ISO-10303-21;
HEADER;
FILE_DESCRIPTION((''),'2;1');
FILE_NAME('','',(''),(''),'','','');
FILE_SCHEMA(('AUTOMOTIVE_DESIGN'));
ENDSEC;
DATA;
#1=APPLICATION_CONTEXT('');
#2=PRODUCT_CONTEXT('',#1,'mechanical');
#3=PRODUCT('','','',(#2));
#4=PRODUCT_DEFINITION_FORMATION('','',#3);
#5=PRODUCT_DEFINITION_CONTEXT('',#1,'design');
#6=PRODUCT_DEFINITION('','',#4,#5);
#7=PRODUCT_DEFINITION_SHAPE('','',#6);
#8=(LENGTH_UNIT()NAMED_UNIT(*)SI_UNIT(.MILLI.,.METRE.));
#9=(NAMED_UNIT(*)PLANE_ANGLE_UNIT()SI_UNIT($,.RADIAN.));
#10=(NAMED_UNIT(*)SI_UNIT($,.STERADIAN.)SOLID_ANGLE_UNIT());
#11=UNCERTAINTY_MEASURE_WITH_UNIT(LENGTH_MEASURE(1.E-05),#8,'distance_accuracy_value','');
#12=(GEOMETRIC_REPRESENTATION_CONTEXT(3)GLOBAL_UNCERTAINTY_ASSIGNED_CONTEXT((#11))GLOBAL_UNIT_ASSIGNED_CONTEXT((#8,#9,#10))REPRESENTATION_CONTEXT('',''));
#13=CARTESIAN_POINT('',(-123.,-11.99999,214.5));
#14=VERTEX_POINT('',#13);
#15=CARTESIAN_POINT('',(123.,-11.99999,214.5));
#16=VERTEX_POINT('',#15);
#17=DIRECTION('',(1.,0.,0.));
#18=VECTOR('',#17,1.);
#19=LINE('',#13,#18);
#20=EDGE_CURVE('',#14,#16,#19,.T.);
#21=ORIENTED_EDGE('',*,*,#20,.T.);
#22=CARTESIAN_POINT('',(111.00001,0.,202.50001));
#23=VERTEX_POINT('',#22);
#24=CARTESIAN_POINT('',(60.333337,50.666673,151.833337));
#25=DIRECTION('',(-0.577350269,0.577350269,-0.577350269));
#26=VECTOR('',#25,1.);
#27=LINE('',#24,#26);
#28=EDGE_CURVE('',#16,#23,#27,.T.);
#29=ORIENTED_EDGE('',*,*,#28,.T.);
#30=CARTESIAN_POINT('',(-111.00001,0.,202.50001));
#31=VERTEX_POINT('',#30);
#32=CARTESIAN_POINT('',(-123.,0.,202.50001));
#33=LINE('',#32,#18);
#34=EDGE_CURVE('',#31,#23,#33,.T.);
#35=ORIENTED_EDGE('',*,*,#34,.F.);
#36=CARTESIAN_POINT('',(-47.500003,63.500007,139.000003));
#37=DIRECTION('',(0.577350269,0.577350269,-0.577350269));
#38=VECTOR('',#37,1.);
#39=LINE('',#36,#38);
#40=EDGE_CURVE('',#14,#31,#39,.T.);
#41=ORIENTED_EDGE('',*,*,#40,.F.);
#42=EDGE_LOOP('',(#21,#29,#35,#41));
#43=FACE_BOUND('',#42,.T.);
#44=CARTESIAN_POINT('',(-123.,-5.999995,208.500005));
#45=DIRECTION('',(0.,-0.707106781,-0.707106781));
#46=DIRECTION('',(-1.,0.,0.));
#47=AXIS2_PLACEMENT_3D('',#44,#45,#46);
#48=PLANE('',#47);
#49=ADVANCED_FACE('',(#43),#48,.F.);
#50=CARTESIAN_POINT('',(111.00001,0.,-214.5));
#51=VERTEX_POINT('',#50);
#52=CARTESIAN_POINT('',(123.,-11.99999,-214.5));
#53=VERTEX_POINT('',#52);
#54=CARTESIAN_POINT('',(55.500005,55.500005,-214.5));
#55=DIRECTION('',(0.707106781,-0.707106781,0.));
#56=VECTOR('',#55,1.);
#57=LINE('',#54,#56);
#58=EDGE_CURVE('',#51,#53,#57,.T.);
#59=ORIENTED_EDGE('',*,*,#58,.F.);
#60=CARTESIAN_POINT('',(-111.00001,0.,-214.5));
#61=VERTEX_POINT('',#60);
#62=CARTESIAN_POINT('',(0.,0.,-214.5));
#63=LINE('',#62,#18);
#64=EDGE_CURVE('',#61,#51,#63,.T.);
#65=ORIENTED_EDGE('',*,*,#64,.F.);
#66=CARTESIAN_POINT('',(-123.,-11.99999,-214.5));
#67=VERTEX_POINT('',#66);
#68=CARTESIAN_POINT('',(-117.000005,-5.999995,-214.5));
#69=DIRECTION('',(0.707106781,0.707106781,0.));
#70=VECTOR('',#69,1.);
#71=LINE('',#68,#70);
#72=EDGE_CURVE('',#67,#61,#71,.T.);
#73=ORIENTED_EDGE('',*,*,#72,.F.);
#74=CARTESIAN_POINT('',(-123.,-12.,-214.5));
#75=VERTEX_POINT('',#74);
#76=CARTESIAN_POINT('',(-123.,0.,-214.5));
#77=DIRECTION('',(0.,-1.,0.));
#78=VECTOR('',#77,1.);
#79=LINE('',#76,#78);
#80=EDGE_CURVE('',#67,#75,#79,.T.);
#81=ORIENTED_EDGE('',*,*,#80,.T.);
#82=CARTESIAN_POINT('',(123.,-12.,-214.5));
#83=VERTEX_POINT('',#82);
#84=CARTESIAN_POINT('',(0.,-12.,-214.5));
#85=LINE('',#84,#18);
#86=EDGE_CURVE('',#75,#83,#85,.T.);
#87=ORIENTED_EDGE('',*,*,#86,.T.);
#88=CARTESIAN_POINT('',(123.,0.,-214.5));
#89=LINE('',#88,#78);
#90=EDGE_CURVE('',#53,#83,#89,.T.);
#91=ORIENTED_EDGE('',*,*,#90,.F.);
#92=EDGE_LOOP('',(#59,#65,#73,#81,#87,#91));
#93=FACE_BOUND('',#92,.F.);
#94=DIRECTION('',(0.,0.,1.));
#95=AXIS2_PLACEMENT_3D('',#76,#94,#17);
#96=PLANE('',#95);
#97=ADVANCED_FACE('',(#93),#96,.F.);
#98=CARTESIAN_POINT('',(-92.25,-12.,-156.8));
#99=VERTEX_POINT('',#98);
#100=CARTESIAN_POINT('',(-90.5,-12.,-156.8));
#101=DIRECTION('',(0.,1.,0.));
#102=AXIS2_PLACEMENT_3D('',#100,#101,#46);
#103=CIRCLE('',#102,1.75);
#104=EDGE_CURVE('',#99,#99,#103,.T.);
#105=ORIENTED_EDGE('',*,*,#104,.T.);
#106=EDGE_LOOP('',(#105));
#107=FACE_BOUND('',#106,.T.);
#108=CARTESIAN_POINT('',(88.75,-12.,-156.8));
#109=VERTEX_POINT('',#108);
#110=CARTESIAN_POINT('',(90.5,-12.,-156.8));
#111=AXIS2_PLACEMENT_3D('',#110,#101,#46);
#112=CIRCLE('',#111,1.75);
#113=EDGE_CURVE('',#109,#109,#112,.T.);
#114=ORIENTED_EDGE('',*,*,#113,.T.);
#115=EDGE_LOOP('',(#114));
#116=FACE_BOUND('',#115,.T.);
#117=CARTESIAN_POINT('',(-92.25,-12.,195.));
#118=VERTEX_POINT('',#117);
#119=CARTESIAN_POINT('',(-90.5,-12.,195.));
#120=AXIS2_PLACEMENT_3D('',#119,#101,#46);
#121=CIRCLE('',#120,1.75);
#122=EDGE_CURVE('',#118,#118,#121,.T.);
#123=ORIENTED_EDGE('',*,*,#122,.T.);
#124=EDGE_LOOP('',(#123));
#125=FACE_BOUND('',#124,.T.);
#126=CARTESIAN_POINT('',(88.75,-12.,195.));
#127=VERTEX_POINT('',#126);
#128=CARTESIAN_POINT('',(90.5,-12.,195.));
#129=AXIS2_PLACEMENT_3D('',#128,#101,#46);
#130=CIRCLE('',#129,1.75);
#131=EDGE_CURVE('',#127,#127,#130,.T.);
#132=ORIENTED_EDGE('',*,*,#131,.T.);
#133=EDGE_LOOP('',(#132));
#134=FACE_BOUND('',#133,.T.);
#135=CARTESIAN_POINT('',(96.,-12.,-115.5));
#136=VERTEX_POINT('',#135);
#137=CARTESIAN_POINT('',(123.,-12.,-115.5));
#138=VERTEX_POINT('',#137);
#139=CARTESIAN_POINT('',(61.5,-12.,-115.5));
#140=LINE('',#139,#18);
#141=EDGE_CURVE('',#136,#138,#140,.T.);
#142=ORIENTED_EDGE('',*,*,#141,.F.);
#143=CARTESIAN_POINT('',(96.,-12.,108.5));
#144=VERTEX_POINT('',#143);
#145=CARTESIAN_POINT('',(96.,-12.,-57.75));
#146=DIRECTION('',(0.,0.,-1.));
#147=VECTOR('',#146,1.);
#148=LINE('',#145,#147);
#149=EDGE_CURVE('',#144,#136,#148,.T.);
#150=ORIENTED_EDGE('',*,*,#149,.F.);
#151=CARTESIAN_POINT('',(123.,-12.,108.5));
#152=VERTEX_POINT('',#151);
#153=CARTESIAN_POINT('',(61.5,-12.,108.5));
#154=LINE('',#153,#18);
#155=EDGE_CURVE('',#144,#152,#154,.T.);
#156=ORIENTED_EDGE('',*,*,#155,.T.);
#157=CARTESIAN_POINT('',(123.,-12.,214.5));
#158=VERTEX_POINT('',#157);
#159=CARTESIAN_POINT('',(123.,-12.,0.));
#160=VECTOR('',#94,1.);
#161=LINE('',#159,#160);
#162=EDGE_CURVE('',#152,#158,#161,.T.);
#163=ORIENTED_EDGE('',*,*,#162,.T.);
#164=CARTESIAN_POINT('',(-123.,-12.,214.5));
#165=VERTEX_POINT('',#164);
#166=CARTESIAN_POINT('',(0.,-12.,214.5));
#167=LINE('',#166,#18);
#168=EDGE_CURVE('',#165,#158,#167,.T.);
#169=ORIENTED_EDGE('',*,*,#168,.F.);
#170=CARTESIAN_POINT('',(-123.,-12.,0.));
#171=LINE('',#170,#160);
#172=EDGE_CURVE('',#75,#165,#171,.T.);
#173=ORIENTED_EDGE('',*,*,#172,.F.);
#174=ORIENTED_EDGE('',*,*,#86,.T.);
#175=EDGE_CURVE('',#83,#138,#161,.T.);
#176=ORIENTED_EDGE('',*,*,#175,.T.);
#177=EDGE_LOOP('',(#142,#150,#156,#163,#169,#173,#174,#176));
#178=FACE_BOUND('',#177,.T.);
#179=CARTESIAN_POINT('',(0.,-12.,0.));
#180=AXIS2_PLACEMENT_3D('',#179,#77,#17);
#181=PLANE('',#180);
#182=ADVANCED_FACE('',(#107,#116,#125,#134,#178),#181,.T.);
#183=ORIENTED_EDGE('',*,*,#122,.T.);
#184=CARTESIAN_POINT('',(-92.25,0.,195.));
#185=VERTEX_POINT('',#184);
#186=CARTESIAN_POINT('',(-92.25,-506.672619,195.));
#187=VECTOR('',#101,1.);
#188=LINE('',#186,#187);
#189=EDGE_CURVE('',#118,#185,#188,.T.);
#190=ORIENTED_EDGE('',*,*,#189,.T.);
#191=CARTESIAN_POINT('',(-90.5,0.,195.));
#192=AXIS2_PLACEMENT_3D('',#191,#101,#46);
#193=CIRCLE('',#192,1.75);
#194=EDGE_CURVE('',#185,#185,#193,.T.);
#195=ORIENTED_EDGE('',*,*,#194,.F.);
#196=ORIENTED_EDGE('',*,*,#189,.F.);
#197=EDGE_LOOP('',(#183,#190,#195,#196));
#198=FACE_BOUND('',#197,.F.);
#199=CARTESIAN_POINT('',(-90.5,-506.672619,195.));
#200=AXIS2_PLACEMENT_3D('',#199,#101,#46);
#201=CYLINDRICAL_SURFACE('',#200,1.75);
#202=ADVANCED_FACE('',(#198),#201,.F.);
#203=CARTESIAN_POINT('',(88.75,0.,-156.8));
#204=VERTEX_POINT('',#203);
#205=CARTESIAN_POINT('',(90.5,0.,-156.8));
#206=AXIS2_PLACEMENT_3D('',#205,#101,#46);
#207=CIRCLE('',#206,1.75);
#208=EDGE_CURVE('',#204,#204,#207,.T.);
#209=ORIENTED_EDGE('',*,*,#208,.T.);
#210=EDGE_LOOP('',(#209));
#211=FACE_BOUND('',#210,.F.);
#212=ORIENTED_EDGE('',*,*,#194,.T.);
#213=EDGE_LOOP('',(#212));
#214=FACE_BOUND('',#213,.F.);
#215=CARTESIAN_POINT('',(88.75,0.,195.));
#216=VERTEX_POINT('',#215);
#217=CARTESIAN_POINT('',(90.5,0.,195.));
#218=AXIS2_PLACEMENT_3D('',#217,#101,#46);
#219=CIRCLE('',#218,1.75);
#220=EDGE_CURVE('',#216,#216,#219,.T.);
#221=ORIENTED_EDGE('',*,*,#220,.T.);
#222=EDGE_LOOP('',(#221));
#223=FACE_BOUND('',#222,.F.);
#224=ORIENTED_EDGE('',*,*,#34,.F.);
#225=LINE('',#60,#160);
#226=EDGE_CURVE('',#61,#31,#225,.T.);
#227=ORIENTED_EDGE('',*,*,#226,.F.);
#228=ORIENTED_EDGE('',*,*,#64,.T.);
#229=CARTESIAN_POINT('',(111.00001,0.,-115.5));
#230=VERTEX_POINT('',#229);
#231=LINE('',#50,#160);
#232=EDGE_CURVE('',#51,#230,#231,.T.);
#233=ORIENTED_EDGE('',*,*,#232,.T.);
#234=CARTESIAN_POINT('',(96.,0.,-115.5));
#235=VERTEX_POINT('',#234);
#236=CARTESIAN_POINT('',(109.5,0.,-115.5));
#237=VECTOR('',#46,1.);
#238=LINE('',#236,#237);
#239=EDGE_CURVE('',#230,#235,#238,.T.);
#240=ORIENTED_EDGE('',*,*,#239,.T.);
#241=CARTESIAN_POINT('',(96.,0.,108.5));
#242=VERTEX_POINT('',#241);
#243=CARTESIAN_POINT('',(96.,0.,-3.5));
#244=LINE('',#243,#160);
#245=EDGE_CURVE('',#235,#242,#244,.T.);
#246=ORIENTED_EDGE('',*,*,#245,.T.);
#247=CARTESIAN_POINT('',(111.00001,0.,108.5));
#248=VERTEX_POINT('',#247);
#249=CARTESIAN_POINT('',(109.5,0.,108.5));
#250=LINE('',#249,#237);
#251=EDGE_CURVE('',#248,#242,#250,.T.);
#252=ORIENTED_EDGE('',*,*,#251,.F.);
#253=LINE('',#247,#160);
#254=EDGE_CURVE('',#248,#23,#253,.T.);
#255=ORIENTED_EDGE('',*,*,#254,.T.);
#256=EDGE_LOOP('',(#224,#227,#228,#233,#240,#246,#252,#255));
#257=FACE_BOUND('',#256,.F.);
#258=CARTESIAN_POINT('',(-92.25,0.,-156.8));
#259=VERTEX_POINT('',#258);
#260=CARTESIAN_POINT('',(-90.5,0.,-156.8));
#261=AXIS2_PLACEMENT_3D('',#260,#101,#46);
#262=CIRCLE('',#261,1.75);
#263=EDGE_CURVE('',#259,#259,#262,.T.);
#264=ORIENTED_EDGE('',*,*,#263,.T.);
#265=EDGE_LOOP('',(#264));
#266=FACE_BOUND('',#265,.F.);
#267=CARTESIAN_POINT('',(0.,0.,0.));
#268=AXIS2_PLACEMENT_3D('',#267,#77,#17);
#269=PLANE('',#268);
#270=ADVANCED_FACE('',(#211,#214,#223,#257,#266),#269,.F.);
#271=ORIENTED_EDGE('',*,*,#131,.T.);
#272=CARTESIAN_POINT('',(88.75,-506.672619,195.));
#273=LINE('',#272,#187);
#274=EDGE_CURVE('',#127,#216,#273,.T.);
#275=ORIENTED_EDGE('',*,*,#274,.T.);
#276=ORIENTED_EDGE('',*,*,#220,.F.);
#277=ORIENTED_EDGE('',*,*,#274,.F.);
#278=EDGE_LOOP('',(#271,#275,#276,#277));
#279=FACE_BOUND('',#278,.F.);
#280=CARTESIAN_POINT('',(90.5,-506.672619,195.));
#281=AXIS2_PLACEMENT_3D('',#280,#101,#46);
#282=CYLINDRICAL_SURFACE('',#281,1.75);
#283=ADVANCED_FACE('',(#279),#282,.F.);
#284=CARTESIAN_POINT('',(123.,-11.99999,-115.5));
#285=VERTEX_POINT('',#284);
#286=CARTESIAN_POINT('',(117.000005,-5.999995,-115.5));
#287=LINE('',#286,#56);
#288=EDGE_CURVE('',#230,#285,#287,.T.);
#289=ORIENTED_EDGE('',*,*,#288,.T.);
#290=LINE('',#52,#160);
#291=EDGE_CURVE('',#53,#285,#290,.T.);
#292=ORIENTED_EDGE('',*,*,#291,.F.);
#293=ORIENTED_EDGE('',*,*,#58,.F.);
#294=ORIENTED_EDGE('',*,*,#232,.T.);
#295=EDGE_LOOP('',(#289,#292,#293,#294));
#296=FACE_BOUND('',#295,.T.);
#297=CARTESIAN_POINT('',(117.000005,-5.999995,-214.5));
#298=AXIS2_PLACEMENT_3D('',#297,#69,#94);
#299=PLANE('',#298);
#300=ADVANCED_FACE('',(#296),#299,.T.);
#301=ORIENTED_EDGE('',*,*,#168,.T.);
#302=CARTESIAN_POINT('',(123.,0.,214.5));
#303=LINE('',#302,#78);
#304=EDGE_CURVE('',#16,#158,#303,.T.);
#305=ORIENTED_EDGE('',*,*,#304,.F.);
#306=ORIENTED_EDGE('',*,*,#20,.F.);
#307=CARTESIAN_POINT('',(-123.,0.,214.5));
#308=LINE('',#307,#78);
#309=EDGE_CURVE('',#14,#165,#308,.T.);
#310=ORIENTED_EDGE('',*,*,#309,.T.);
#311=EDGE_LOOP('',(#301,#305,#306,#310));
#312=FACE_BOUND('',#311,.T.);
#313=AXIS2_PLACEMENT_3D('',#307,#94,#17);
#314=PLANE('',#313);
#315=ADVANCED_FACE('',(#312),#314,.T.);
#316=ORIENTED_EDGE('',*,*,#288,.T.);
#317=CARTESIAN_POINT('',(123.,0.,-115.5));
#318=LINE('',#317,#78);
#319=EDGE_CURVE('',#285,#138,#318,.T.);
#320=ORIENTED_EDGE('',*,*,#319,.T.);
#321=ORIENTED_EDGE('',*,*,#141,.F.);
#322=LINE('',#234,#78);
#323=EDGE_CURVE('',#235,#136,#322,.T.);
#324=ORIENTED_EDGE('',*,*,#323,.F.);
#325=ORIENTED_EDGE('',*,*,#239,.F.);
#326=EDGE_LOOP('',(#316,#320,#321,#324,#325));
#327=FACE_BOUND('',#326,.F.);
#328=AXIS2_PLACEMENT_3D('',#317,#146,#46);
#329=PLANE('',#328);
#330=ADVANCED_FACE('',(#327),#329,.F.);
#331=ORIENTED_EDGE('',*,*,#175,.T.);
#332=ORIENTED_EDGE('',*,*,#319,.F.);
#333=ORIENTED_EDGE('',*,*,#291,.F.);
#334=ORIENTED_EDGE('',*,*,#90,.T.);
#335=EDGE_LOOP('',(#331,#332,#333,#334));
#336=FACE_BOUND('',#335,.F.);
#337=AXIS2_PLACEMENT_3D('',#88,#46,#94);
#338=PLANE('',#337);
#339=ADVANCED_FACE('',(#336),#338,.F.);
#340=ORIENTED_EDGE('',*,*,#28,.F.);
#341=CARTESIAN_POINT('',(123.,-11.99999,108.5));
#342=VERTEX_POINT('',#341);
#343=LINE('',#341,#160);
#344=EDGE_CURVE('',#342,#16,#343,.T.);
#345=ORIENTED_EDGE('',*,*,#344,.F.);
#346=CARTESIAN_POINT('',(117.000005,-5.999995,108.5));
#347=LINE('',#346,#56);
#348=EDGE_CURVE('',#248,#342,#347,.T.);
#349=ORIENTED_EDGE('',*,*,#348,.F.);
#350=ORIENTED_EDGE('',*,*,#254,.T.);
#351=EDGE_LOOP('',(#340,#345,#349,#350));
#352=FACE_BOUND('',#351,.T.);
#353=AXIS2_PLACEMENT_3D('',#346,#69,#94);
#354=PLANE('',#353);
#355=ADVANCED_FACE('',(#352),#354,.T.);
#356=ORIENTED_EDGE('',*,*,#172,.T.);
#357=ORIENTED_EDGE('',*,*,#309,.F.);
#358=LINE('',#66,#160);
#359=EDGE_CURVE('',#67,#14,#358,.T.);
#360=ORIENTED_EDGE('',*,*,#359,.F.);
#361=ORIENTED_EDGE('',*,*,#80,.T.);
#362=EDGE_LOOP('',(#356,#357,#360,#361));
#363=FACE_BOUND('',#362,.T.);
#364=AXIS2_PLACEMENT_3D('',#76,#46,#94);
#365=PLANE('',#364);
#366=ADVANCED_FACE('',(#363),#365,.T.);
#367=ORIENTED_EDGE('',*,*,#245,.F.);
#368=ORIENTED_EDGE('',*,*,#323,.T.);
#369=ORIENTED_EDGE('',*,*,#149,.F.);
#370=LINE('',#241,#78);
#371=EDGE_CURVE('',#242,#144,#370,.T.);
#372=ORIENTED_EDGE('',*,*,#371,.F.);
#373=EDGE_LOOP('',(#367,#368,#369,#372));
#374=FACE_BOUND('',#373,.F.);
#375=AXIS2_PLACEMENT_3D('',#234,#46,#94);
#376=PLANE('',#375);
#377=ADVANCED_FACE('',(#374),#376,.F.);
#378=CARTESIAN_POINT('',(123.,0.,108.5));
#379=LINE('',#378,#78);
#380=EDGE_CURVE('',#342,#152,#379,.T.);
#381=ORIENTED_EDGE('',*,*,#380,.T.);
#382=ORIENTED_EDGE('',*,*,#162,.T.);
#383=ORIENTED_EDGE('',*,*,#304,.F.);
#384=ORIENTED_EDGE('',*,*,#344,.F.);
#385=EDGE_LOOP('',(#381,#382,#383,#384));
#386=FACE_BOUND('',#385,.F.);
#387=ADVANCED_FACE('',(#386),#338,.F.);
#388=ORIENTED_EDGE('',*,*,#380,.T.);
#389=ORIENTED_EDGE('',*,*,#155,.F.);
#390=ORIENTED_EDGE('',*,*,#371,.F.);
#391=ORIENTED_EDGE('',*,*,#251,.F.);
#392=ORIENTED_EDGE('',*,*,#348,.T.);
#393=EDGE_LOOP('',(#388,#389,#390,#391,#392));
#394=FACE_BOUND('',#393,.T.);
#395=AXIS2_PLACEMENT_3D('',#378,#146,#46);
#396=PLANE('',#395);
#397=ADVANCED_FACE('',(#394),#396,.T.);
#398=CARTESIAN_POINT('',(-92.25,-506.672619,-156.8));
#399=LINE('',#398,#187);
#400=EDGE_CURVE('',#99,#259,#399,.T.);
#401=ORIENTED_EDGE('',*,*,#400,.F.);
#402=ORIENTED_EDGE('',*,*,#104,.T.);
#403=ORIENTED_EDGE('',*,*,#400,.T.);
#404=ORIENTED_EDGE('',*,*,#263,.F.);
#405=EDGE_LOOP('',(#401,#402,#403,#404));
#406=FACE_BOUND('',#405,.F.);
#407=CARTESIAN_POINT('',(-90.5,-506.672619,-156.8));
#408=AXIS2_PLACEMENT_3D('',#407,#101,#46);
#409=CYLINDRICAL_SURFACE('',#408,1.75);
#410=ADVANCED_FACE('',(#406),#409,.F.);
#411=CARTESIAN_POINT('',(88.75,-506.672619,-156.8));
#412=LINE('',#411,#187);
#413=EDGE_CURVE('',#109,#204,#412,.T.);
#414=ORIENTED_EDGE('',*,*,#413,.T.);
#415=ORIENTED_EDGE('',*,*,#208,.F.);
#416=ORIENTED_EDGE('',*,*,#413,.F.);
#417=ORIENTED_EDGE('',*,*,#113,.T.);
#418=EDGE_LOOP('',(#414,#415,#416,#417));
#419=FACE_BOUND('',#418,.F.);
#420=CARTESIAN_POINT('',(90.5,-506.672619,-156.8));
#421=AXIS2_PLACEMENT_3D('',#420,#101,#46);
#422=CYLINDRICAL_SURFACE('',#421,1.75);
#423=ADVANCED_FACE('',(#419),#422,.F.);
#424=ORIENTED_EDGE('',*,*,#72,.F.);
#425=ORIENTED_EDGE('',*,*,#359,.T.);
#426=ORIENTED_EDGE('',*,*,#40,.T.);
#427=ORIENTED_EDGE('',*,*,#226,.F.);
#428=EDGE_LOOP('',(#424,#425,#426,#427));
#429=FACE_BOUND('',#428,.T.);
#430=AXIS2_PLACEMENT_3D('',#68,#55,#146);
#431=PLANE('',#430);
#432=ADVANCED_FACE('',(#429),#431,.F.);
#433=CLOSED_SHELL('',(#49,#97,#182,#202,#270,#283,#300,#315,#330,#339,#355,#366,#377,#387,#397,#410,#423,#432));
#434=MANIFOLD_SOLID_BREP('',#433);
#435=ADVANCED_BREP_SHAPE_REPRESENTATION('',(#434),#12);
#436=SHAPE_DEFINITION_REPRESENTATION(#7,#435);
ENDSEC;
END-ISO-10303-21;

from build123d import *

# Parameters (mm, degrees)
F0_W     = 246
F0_H     = 429
F1_DEPTH = 12
F2_W     = 27
F2_H     = 224
F3_DEPTH = 25
F4_SIZE  = 11.99999
F6_D     = 3.5


# Not quite as in the source:
# - a fillet or chamfer is up to 0.001 mm smaller than in the source, because OpenCascade refuses the exact size


with BuildPart() as f1:
    # F0 (on Front) → F1 (new body)
    with BuildSketch(Plane.XZ):
        Rectangle(F0_W, F0_H)
    extrude(amount=F1_DEPTH)

    # F2 (on face) → F3 (cut)
    with BuildSketch(Plane(origin=(0, 0, 0), x_dir=(-1, 0, 0), z_dir=(0, 1, 0))):
        with Locations((-109.5, -3.5)):
            Rectangle(F2_W, F2_H)
    extrude(amount=-F3_DEPTH, mode=Mode.SUBTRACT)

    # F4 (size 12 in the source; OpenCascade refuses exactly that, so slightly less here)
    f4_edges = [f1.edges().sort_by_distance(p)[0] for p in [
        (0, 0, 214.5),
        (-123, 0, 0),
        (123, 0, 161.5),
        (123, 0, -165),
    ]]
    chamfer(f4_edges, length=F4_SIZE)

    # F6 (through all)
    with Locations(Plane.XZ.offset(12)):
        with Locations((-90.5, 195), (90.5, 195), (90.5, -156.8), (-90.5, -156.8)):
            Hole(F6_D / 2)


solid = f1.part
